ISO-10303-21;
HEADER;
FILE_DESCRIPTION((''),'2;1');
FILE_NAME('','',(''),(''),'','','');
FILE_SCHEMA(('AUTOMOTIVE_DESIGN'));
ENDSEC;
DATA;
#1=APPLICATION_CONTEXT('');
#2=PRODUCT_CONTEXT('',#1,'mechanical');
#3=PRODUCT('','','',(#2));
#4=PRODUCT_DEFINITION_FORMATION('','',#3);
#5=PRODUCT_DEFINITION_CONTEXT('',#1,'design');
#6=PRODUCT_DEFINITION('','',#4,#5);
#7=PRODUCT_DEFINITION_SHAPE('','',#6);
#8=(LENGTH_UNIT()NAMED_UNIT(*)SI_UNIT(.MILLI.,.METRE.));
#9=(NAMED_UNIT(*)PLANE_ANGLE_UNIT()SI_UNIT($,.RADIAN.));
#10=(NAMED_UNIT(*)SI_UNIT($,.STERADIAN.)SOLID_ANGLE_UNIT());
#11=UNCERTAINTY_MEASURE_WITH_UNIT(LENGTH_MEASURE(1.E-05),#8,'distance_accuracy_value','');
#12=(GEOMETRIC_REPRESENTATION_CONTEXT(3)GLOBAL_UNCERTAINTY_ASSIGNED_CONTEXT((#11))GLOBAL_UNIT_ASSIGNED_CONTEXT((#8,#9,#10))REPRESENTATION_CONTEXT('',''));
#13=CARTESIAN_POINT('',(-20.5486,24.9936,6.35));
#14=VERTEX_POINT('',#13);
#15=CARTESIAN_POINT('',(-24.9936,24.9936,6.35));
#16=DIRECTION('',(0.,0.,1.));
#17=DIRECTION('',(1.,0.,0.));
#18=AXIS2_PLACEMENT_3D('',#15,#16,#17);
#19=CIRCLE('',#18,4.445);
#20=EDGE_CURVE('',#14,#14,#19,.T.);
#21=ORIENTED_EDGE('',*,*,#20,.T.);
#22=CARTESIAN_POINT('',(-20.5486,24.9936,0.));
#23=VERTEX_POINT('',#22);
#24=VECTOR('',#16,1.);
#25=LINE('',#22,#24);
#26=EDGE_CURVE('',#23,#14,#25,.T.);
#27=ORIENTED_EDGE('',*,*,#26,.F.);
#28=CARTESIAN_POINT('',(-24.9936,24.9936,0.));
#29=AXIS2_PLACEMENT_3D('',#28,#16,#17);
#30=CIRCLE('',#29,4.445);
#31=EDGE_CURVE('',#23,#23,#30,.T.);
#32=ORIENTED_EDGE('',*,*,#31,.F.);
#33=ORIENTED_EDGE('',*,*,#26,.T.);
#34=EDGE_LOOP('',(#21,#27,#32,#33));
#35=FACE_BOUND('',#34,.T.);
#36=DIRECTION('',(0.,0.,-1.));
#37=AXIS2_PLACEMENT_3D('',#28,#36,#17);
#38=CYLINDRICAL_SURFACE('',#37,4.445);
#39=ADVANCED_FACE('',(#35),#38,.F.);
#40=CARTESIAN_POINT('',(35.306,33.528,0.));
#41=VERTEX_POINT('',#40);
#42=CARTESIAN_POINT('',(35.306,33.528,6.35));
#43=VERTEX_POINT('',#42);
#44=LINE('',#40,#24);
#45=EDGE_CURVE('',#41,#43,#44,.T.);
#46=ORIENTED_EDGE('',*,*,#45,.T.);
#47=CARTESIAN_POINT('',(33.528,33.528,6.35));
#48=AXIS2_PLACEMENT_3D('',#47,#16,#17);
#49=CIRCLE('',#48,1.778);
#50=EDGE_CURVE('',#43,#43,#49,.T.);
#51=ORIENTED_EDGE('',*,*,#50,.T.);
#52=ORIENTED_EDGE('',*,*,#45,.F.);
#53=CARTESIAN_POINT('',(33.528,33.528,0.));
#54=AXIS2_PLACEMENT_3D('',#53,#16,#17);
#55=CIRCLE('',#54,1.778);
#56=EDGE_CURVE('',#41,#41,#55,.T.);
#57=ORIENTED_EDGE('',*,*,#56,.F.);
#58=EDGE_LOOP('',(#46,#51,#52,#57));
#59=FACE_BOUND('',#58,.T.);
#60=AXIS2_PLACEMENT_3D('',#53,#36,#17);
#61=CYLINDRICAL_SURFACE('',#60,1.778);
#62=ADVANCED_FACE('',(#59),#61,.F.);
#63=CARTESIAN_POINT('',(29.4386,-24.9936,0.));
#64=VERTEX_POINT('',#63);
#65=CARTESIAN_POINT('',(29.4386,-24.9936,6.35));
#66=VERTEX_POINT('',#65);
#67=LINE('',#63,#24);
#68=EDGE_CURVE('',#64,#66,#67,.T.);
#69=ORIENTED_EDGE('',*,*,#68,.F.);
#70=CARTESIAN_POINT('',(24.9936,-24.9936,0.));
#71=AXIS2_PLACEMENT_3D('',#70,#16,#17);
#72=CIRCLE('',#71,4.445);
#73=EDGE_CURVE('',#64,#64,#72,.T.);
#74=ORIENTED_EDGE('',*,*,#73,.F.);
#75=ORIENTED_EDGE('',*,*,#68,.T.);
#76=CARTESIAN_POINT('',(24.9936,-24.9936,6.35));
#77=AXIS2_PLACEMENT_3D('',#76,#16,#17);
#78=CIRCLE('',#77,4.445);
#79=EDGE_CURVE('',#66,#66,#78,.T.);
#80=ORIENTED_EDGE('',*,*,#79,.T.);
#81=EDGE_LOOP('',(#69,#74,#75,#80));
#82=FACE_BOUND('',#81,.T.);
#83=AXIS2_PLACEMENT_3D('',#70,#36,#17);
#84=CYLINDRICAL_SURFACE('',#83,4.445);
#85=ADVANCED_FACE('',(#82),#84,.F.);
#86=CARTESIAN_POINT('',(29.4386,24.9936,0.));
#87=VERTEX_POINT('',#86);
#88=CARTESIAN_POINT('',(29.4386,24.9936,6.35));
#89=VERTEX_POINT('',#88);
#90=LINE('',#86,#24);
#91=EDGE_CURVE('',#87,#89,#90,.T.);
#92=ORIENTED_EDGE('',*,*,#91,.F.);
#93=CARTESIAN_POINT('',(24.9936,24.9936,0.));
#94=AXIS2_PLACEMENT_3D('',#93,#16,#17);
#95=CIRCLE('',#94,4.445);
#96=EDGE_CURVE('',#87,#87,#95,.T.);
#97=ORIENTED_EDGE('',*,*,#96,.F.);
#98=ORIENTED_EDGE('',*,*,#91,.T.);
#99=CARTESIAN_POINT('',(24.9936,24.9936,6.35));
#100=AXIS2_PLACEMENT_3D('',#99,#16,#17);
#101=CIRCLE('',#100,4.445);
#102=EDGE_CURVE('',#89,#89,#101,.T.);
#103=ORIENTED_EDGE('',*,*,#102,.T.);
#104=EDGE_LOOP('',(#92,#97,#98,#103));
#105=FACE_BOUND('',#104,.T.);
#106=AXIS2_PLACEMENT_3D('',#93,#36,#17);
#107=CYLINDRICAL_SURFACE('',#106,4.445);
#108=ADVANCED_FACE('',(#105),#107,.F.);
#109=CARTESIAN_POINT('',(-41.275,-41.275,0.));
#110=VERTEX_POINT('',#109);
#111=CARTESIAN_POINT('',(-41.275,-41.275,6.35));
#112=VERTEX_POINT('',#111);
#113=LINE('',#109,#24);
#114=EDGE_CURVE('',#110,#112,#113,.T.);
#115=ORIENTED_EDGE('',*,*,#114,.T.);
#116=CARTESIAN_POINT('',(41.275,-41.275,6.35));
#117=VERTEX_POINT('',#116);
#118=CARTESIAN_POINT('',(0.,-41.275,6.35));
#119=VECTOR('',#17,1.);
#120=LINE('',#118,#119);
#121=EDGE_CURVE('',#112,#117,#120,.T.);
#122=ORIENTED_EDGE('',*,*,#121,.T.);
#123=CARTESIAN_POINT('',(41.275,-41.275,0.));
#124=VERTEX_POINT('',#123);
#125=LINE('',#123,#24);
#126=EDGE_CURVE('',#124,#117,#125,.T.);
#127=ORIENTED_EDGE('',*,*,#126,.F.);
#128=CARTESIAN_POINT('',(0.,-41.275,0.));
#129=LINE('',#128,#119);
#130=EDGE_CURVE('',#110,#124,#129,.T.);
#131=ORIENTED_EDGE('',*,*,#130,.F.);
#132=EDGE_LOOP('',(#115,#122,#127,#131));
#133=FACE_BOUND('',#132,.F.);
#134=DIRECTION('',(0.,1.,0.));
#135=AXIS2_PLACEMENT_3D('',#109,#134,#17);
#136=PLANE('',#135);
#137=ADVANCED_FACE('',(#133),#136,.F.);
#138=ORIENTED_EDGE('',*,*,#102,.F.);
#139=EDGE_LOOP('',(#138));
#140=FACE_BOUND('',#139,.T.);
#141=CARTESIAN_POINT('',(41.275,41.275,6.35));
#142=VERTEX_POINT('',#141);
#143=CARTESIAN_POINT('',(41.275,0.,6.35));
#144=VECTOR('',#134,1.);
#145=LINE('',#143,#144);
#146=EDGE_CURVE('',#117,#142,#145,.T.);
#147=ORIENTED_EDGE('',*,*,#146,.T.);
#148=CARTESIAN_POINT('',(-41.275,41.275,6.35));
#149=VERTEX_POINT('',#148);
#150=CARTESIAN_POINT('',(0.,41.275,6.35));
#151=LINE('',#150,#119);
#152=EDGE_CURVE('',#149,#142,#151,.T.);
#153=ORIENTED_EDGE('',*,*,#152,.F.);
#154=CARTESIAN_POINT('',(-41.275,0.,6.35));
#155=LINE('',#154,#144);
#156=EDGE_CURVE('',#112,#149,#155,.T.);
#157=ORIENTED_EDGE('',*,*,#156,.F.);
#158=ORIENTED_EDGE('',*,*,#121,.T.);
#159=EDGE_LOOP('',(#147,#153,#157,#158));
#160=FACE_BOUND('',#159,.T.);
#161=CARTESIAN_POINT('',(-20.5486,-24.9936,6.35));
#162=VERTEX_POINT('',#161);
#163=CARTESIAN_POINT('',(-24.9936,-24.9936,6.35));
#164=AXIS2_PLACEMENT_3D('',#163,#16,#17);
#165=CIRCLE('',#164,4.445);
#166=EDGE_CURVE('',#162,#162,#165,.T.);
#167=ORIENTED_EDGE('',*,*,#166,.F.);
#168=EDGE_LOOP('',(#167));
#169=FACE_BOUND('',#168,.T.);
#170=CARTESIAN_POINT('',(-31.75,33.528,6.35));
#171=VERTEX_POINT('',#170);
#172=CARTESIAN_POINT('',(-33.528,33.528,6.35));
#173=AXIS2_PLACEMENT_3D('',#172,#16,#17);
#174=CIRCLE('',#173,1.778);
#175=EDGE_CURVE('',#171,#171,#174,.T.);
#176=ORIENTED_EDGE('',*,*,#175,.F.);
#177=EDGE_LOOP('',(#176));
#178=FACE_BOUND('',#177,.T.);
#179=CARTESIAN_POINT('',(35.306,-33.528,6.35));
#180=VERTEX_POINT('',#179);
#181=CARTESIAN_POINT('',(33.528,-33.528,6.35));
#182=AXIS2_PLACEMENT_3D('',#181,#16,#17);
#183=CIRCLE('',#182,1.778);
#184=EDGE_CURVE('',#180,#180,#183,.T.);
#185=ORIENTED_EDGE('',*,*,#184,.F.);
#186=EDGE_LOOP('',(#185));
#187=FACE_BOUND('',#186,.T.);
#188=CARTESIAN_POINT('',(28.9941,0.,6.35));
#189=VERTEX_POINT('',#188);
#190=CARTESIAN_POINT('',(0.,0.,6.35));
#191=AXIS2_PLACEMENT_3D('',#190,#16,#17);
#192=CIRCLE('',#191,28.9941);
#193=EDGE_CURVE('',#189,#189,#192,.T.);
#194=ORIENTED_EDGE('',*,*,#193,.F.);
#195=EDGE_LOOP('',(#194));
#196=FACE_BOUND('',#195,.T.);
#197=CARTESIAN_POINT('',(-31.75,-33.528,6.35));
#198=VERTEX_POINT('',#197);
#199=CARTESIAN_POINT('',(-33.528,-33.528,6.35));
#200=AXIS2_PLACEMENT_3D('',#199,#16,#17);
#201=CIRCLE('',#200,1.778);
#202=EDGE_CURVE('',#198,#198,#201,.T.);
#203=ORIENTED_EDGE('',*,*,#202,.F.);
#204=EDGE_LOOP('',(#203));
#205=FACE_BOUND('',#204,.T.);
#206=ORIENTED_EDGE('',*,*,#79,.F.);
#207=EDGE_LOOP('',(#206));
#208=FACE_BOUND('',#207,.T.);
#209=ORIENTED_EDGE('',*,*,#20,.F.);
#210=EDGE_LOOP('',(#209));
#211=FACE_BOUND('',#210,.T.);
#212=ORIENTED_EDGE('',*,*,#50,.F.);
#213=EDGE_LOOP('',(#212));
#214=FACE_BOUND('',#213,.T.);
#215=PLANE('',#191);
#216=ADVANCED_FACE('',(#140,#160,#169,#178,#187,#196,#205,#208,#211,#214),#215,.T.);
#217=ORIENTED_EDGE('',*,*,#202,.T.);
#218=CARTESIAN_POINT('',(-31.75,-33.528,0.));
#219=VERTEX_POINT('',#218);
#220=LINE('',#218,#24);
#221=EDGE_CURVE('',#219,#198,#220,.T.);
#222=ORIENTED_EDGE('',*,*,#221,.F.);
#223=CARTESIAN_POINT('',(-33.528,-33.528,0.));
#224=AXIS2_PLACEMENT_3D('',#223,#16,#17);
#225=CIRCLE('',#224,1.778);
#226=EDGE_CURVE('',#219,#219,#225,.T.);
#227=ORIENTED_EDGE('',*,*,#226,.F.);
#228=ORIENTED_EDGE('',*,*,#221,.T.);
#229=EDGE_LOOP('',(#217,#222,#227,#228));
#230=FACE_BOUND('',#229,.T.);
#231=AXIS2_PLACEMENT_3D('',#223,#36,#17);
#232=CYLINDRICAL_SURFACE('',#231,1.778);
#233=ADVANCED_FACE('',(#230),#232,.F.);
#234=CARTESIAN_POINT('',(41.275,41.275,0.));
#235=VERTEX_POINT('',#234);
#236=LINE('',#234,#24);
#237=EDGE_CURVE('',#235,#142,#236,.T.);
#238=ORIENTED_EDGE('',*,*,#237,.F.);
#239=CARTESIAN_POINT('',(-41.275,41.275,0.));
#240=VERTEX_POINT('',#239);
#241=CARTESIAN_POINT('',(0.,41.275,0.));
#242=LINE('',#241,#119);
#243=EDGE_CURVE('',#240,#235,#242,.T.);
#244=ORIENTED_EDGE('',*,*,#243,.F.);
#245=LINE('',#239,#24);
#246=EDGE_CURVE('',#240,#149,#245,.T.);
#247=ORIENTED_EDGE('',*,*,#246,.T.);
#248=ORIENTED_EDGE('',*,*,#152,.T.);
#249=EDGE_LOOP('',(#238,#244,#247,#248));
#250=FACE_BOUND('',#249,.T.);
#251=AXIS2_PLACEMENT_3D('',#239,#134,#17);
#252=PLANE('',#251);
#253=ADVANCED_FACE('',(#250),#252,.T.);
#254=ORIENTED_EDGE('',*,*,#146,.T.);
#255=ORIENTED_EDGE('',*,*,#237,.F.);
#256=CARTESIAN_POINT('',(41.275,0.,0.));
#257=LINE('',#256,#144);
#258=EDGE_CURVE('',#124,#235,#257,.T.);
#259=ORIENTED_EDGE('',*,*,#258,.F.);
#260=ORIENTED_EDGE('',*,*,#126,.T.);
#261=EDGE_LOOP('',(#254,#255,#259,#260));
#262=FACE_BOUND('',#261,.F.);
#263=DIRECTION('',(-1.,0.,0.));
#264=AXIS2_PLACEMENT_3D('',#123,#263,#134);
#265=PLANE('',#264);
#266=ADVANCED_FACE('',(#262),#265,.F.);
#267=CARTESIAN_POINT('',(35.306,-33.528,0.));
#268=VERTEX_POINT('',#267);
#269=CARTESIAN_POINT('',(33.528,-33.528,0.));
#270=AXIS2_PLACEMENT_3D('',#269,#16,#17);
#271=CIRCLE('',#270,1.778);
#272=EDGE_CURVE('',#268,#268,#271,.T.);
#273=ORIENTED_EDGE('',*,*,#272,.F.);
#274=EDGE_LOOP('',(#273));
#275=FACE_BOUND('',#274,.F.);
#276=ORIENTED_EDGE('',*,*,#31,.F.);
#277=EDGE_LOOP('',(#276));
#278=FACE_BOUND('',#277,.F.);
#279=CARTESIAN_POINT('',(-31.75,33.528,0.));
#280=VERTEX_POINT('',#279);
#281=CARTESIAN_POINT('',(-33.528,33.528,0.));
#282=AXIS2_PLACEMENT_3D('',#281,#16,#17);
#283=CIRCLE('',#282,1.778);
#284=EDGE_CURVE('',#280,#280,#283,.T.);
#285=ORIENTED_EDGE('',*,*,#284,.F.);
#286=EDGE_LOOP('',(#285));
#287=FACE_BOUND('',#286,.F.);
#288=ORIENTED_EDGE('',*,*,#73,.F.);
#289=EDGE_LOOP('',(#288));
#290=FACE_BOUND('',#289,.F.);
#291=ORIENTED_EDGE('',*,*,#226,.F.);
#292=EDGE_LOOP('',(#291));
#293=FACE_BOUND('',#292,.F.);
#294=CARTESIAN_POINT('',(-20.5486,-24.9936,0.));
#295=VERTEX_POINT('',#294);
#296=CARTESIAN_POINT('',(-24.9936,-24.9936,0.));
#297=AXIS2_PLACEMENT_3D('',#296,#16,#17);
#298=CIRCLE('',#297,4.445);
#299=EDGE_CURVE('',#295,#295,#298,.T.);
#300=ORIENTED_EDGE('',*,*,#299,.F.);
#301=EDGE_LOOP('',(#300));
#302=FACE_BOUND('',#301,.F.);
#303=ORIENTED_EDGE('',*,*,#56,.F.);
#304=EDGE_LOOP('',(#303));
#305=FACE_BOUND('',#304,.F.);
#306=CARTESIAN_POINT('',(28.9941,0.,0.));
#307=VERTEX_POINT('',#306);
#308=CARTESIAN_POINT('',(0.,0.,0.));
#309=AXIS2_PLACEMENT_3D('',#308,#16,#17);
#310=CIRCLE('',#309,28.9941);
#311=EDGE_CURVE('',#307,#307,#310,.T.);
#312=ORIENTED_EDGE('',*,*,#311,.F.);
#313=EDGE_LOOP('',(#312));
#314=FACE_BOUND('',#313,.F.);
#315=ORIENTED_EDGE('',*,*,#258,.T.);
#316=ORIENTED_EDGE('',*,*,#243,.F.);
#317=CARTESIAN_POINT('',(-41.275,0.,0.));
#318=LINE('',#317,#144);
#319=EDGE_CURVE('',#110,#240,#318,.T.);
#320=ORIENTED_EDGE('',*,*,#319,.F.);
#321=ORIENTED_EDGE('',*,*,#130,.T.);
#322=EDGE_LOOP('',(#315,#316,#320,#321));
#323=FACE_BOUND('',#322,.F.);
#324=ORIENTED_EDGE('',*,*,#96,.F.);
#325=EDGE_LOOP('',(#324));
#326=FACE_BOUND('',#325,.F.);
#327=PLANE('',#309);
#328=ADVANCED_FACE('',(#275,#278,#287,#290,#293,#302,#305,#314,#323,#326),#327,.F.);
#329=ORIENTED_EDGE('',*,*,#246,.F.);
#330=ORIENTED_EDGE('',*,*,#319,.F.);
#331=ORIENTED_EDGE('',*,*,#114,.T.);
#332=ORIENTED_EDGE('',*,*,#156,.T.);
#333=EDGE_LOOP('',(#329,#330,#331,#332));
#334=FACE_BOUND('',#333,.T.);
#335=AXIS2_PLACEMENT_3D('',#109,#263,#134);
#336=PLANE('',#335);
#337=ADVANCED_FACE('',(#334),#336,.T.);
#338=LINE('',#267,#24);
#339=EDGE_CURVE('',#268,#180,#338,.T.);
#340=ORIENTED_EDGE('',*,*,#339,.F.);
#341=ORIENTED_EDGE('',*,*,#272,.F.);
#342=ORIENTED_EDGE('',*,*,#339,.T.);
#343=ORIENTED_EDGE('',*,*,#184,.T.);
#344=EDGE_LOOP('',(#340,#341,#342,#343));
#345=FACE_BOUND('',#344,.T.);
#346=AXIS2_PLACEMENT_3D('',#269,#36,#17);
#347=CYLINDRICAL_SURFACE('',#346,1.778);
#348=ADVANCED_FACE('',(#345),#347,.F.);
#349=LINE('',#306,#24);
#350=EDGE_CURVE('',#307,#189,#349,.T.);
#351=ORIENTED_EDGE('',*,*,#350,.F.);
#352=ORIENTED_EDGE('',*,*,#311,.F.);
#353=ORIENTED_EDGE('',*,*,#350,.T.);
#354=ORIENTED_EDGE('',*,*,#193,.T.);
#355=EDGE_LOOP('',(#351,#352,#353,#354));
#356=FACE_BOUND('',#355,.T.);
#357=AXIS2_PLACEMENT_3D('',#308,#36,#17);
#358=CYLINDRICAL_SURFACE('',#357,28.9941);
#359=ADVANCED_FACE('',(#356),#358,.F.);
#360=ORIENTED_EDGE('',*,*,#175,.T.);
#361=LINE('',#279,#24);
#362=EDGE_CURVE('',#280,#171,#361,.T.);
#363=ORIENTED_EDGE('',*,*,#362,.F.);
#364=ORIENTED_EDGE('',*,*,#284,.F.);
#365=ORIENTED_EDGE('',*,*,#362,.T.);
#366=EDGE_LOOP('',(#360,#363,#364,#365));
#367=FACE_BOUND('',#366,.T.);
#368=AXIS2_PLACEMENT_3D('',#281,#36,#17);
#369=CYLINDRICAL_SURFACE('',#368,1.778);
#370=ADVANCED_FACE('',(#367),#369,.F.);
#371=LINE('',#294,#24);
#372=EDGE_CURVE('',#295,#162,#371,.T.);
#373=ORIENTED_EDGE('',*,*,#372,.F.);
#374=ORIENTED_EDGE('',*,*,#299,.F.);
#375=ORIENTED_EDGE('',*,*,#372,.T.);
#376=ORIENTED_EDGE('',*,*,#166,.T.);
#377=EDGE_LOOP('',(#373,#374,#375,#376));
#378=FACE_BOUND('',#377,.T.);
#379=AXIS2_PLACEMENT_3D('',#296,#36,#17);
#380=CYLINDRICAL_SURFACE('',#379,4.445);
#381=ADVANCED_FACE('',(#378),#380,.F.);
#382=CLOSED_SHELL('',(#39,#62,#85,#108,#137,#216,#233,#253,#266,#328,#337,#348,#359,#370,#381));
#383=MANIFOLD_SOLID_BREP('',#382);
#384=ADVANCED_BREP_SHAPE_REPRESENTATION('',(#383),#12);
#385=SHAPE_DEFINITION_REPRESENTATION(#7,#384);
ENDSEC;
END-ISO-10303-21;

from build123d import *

# Parameters (mm, degrees)
F0_W     = 82.55
F0_H     = 82.55
F0_R     = 1.778
F0_R_2   = 4.445
F0_R_3   = 28.9941
F1_DEPTH = 6.35


# Not quite as in the source:
# - a length typed as a fraction of an inch, garbled in the dataset ("3 / 203.2 mm" for 3/8 in), is restored


with BuildPart() as f1:
    # F0 (on Top) → F1 (new body)
    with BuildSketch(Plane.XY):
        Rectangle(F0_W, F0_H)
        with Locations((-33.528, -33.528)):
            Circle(F0_R, mode=Mode.SUBTRACT)
        with Locations((-24.9936, -24.9936)):
            Circle(F0_R_2, mode=Mode.SUBTRACT)
        with Locations((33.528, -33.528)):
            Circle(F0_R, mode=Mode.SUBTRACT)
        with Locations((24.9936, -24.9936)):
            Circle(F0_R_2, mode=Mode.SUBTRACT)
        with Locations((-24.9936, 24.9936)):
            Circle(F0_R_2, mode=Mode.SUBTRACT)
        with Locations((-33.528, 33.528)):
            Circle(F0_R, mode=Mode.SUBTRACT)
        Circle(F0_R_3, mode=Mode.SUBTRACT)
        with Locations((24.9936, 24.9936)):
            Circle(F0_R_2, mode=Mode.SUBTRACT)
        with Locations((33.528, 33.528)):
            Circle(F0_R, mode=Mode.SUBTRACT)
    extrude(amount=F1_DEPTH)


solid = f1.part
